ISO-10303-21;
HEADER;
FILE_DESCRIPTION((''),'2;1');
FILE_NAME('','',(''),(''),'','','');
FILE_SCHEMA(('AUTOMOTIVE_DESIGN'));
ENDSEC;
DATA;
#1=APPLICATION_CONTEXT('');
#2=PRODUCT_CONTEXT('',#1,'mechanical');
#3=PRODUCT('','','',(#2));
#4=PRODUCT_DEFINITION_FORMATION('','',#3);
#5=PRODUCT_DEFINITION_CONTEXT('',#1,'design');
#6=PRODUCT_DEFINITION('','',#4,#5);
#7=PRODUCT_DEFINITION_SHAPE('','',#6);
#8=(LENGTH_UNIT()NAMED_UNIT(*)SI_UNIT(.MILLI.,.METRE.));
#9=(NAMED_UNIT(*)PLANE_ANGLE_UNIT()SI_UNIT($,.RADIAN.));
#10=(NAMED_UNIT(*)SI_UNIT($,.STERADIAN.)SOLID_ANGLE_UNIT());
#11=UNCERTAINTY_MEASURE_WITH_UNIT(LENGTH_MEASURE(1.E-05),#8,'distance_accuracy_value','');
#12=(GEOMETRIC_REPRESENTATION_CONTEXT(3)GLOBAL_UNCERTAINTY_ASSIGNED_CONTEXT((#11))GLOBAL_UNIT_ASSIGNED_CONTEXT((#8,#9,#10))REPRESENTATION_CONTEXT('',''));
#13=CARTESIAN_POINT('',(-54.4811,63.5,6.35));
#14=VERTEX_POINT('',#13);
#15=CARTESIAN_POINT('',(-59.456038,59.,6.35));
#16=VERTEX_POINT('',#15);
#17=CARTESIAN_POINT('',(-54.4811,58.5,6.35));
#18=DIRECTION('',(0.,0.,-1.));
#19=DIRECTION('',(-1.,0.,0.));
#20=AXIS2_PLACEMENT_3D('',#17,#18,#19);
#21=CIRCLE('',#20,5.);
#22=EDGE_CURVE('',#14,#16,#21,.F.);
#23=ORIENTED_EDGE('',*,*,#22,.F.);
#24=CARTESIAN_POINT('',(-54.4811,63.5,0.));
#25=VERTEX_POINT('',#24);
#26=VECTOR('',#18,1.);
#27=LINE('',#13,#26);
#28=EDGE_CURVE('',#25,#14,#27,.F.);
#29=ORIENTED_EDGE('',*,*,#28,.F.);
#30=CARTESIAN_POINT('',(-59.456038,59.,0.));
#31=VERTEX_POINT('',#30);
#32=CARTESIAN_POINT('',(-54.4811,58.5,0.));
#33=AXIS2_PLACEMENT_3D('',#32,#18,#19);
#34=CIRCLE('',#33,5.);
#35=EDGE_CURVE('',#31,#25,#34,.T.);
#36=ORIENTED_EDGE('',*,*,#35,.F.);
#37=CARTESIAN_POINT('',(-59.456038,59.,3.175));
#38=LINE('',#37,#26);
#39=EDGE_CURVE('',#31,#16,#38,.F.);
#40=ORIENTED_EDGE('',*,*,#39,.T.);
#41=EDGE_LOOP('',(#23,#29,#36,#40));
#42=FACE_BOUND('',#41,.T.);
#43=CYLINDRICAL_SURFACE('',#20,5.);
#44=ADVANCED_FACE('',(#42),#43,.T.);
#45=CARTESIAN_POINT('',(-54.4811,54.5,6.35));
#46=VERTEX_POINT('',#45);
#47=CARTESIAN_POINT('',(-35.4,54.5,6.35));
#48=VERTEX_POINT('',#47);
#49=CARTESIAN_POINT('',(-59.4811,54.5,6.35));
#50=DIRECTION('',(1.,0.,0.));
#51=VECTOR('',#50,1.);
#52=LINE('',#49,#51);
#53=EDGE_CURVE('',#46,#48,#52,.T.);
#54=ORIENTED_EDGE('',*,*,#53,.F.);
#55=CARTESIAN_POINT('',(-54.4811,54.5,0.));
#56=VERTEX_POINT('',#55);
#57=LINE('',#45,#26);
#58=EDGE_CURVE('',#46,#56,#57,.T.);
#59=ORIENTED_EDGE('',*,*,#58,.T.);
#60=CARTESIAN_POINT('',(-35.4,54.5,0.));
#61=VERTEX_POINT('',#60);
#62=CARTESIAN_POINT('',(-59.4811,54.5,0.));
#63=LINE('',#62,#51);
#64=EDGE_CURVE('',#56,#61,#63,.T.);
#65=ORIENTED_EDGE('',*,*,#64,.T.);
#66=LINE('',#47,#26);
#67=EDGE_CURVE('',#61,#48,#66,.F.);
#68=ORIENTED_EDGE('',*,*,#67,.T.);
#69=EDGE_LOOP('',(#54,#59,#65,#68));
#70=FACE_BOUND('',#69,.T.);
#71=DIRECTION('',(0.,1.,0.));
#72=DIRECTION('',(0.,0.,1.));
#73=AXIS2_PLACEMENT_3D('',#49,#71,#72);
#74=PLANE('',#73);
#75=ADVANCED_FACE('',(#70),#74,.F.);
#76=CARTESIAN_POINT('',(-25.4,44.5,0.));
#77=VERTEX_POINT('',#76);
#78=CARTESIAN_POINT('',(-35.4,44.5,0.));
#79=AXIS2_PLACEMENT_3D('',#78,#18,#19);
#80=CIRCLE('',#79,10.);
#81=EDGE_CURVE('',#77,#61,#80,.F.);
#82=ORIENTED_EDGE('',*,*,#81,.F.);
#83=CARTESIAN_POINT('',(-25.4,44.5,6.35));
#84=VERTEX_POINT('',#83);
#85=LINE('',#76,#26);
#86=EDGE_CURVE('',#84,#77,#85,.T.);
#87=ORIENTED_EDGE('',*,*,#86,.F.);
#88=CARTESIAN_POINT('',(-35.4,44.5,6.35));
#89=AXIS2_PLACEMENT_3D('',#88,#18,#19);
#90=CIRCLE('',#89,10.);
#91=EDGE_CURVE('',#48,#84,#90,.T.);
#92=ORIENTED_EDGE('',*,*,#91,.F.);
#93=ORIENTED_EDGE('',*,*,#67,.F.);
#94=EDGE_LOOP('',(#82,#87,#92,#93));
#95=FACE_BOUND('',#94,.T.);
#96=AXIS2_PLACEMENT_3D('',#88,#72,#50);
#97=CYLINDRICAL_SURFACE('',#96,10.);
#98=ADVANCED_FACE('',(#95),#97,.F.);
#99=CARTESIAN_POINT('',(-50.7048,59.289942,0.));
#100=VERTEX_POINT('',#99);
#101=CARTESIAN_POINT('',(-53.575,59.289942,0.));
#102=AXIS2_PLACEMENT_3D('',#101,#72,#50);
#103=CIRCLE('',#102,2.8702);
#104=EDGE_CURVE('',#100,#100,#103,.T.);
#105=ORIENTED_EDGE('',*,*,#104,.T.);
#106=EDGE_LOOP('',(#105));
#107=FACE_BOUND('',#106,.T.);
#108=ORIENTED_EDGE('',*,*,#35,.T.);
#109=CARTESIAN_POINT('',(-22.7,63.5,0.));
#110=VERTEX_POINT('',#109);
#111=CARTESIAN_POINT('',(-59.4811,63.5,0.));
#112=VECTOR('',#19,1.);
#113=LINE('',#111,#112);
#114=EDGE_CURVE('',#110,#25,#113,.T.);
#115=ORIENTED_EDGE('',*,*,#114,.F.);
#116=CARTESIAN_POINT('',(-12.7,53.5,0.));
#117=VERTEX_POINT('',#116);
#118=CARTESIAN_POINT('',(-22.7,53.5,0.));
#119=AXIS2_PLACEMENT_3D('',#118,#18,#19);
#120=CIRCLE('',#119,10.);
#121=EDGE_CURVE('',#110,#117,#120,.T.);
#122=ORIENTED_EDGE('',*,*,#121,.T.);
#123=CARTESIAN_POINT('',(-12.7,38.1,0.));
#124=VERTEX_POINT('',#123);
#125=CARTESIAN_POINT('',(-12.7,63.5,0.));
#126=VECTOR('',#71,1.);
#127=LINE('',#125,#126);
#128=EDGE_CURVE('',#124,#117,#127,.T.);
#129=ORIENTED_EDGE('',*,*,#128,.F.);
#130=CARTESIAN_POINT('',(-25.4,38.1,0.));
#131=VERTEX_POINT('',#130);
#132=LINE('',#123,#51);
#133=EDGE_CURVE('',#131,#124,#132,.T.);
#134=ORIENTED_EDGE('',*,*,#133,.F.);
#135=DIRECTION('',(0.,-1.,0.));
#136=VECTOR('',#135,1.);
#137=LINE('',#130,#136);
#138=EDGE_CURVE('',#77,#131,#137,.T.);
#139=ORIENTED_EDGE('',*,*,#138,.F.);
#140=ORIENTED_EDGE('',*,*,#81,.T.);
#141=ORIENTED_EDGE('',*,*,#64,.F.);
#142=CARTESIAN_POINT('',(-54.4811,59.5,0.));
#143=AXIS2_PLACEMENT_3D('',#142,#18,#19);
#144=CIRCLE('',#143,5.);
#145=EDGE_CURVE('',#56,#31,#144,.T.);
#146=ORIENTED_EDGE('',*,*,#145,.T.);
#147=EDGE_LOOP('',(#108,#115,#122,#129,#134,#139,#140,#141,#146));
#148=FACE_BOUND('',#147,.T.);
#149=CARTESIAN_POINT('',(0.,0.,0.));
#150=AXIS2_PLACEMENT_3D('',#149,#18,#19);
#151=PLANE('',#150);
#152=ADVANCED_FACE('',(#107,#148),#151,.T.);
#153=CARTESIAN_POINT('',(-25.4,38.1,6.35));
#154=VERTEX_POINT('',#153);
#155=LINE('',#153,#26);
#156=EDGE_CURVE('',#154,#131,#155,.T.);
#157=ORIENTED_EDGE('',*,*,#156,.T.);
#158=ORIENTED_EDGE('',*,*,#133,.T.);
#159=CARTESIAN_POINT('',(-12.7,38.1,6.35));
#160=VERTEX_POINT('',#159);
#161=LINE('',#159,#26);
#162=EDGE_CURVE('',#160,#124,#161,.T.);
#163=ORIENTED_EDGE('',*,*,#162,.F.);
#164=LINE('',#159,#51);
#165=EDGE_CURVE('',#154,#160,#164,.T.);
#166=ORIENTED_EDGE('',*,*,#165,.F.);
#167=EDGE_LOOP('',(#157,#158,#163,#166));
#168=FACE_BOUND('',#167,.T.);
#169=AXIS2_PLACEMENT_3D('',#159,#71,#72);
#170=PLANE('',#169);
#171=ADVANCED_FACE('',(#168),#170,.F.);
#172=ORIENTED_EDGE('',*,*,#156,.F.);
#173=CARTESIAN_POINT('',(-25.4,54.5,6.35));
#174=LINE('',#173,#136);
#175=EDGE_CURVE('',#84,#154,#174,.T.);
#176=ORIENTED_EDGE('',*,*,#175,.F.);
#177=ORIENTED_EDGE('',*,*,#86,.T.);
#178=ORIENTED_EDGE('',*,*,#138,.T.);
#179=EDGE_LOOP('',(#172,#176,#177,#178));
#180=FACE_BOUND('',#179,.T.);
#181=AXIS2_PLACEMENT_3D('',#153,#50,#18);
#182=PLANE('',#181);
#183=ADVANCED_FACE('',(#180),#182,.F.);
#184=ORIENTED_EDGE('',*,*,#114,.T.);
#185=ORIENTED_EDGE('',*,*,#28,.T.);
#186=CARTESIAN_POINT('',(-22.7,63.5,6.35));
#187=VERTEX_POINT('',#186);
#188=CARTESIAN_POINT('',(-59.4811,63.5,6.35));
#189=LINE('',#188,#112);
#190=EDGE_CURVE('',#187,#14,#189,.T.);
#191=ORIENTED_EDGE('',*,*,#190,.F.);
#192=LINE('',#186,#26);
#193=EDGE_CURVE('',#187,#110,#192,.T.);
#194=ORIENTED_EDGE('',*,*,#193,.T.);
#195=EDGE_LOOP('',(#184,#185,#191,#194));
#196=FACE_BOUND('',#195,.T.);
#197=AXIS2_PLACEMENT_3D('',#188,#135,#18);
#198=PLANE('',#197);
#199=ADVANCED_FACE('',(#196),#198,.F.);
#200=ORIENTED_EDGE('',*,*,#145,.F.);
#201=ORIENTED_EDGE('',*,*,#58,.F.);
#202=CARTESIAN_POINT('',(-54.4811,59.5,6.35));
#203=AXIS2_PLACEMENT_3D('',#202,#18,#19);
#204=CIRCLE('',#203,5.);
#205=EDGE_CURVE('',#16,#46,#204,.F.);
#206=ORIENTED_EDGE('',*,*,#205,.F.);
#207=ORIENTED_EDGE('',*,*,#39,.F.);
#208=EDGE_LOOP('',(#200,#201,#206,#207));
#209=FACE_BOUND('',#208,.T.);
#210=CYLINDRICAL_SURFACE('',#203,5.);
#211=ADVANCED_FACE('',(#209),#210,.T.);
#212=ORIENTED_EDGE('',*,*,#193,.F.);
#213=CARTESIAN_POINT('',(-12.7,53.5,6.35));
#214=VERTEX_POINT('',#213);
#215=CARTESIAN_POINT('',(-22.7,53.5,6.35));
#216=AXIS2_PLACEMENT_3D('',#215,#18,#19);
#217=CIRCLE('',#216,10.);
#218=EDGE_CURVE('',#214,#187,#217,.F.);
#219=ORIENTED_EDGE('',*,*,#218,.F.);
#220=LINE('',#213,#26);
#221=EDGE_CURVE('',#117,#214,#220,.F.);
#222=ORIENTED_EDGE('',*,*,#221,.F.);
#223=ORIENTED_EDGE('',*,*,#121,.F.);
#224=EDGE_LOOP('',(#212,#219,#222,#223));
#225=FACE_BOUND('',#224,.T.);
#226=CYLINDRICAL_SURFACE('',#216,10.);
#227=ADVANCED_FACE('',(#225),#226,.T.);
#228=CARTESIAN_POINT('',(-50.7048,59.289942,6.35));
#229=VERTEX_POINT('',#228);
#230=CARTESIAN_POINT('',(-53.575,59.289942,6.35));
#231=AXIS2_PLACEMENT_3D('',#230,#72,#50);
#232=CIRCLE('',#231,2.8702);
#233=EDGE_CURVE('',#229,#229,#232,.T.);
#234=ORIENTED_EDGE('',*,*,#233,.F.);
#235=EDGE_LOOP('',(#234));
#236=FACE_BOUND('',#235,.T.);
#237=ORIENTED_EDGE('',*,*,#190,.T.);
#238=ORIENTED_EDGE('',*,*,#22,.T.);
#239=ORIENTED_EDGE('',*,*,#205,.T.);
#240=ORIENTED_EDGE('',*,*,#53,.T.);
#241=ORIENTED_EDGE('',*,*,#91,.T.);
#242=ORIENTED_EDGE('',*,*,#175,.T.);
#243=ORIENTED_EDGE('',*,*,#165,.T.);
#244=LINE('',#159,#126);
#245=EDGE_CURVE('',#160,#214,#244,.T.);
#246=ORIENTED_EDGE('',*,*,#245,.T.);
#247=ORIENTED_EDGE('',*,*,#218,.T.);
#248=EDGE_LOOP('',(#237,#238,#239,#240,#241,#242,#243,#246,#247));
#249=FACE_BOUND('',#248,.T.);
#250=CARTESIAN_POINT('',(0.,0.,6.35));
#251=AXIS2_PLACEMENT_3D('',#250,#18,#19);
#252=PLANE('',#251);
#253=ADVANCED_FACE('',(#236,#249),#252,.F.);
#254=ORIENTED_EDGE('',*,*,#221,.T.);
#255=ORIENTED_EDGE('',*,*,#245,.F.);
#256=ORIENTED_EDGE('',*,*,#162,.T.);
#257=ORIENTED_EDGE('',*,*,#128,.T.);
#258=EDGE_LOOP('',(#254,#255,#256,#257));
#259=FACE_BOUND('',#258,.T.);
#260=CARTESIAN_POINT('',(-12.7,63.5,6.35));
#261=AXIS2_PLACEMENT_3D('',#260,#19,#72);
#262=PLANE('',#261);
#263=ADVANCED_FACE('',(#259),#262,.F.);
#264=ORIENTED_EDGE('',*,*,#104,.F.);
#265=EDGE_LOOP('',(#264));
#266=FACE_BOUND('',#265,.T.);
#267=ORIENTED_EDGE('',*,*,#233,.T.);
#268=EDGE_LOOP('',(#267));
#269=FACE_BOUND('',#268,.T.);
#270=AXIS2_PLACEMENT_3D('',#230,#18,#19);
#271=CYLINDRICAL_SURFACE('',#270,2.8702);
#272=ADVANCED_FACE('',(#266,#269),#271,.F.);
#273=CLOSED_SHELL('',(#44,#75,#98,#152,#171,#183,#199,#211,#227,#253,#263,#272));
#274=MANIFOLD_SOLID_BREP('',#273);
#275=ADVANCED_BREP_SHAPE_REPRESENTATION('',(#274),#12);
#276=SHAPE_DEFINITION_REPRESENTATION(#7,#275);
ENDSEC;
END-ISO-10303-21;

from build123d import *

# Parameters (mm, degrees)
SKETCH1_R           = 2.8702
BOSS_EXTRUDE1_DEPTH = 6.35
FILLET1_R           = 10
FILLET2_R           = 5


with BuildPart() as part:
    # Sketch1 → Boss-Extrude1 (new body)
    with BuildSketch(Plane.XY):
        Polygon((-12.7, 38.1), (-25.4, 38.1), (-25.4, 44.45), (-25.4, 54.5), (-59.481100474, 54.5), (-59.481100474, 63.5), (-12.7, 63.5), (-12.7, 54.424612003), (-12.7, 44.45), align=None)
        with Locations((-53.575, 59.289941788)):
            Circle(SKETCH1_R, mode=Mode.SUBTRACT)
    extrude(amount=BOSS_EXTRUDE1_DEPTH)

    # Fillet1
    fillet1_edges = [part.edges().sort_by_distance(p)[0] for p in [
        (-25.4, 54.5, 3.175),
        (-12.7, 63.5, 3.175),
    ]]
    fillet(fillet1_edges, radius=FILLET1_R)

    # Fillet2
    # the kernel refuses this fillet: 5 mm, written as the material it takes off along each edge
    with BuildSketch(Plane(origin=(-59.481100474, 63.5, -12.5), x_dir=(0, -1, 0), z_dir=(0, 0, 1)), Plane(origin=(-59.481100474, 54.5, -12.5), x_dir=(1, 0, 0), z_dir=(0, 0, 1))) as fillet2_piece_1:
        with BuildLine():
            CenterArc((FILLET2_R, FILLET2_R), FILLET2_R, 180, 90)
            Line((0, FILLET2_R), (0, 0))
            Line((0, 0), (FILLET2_R, 0))
        make_face()
    extrude(amount=31.35, mode=Mode.SUBTRACT)


solid = part.part
